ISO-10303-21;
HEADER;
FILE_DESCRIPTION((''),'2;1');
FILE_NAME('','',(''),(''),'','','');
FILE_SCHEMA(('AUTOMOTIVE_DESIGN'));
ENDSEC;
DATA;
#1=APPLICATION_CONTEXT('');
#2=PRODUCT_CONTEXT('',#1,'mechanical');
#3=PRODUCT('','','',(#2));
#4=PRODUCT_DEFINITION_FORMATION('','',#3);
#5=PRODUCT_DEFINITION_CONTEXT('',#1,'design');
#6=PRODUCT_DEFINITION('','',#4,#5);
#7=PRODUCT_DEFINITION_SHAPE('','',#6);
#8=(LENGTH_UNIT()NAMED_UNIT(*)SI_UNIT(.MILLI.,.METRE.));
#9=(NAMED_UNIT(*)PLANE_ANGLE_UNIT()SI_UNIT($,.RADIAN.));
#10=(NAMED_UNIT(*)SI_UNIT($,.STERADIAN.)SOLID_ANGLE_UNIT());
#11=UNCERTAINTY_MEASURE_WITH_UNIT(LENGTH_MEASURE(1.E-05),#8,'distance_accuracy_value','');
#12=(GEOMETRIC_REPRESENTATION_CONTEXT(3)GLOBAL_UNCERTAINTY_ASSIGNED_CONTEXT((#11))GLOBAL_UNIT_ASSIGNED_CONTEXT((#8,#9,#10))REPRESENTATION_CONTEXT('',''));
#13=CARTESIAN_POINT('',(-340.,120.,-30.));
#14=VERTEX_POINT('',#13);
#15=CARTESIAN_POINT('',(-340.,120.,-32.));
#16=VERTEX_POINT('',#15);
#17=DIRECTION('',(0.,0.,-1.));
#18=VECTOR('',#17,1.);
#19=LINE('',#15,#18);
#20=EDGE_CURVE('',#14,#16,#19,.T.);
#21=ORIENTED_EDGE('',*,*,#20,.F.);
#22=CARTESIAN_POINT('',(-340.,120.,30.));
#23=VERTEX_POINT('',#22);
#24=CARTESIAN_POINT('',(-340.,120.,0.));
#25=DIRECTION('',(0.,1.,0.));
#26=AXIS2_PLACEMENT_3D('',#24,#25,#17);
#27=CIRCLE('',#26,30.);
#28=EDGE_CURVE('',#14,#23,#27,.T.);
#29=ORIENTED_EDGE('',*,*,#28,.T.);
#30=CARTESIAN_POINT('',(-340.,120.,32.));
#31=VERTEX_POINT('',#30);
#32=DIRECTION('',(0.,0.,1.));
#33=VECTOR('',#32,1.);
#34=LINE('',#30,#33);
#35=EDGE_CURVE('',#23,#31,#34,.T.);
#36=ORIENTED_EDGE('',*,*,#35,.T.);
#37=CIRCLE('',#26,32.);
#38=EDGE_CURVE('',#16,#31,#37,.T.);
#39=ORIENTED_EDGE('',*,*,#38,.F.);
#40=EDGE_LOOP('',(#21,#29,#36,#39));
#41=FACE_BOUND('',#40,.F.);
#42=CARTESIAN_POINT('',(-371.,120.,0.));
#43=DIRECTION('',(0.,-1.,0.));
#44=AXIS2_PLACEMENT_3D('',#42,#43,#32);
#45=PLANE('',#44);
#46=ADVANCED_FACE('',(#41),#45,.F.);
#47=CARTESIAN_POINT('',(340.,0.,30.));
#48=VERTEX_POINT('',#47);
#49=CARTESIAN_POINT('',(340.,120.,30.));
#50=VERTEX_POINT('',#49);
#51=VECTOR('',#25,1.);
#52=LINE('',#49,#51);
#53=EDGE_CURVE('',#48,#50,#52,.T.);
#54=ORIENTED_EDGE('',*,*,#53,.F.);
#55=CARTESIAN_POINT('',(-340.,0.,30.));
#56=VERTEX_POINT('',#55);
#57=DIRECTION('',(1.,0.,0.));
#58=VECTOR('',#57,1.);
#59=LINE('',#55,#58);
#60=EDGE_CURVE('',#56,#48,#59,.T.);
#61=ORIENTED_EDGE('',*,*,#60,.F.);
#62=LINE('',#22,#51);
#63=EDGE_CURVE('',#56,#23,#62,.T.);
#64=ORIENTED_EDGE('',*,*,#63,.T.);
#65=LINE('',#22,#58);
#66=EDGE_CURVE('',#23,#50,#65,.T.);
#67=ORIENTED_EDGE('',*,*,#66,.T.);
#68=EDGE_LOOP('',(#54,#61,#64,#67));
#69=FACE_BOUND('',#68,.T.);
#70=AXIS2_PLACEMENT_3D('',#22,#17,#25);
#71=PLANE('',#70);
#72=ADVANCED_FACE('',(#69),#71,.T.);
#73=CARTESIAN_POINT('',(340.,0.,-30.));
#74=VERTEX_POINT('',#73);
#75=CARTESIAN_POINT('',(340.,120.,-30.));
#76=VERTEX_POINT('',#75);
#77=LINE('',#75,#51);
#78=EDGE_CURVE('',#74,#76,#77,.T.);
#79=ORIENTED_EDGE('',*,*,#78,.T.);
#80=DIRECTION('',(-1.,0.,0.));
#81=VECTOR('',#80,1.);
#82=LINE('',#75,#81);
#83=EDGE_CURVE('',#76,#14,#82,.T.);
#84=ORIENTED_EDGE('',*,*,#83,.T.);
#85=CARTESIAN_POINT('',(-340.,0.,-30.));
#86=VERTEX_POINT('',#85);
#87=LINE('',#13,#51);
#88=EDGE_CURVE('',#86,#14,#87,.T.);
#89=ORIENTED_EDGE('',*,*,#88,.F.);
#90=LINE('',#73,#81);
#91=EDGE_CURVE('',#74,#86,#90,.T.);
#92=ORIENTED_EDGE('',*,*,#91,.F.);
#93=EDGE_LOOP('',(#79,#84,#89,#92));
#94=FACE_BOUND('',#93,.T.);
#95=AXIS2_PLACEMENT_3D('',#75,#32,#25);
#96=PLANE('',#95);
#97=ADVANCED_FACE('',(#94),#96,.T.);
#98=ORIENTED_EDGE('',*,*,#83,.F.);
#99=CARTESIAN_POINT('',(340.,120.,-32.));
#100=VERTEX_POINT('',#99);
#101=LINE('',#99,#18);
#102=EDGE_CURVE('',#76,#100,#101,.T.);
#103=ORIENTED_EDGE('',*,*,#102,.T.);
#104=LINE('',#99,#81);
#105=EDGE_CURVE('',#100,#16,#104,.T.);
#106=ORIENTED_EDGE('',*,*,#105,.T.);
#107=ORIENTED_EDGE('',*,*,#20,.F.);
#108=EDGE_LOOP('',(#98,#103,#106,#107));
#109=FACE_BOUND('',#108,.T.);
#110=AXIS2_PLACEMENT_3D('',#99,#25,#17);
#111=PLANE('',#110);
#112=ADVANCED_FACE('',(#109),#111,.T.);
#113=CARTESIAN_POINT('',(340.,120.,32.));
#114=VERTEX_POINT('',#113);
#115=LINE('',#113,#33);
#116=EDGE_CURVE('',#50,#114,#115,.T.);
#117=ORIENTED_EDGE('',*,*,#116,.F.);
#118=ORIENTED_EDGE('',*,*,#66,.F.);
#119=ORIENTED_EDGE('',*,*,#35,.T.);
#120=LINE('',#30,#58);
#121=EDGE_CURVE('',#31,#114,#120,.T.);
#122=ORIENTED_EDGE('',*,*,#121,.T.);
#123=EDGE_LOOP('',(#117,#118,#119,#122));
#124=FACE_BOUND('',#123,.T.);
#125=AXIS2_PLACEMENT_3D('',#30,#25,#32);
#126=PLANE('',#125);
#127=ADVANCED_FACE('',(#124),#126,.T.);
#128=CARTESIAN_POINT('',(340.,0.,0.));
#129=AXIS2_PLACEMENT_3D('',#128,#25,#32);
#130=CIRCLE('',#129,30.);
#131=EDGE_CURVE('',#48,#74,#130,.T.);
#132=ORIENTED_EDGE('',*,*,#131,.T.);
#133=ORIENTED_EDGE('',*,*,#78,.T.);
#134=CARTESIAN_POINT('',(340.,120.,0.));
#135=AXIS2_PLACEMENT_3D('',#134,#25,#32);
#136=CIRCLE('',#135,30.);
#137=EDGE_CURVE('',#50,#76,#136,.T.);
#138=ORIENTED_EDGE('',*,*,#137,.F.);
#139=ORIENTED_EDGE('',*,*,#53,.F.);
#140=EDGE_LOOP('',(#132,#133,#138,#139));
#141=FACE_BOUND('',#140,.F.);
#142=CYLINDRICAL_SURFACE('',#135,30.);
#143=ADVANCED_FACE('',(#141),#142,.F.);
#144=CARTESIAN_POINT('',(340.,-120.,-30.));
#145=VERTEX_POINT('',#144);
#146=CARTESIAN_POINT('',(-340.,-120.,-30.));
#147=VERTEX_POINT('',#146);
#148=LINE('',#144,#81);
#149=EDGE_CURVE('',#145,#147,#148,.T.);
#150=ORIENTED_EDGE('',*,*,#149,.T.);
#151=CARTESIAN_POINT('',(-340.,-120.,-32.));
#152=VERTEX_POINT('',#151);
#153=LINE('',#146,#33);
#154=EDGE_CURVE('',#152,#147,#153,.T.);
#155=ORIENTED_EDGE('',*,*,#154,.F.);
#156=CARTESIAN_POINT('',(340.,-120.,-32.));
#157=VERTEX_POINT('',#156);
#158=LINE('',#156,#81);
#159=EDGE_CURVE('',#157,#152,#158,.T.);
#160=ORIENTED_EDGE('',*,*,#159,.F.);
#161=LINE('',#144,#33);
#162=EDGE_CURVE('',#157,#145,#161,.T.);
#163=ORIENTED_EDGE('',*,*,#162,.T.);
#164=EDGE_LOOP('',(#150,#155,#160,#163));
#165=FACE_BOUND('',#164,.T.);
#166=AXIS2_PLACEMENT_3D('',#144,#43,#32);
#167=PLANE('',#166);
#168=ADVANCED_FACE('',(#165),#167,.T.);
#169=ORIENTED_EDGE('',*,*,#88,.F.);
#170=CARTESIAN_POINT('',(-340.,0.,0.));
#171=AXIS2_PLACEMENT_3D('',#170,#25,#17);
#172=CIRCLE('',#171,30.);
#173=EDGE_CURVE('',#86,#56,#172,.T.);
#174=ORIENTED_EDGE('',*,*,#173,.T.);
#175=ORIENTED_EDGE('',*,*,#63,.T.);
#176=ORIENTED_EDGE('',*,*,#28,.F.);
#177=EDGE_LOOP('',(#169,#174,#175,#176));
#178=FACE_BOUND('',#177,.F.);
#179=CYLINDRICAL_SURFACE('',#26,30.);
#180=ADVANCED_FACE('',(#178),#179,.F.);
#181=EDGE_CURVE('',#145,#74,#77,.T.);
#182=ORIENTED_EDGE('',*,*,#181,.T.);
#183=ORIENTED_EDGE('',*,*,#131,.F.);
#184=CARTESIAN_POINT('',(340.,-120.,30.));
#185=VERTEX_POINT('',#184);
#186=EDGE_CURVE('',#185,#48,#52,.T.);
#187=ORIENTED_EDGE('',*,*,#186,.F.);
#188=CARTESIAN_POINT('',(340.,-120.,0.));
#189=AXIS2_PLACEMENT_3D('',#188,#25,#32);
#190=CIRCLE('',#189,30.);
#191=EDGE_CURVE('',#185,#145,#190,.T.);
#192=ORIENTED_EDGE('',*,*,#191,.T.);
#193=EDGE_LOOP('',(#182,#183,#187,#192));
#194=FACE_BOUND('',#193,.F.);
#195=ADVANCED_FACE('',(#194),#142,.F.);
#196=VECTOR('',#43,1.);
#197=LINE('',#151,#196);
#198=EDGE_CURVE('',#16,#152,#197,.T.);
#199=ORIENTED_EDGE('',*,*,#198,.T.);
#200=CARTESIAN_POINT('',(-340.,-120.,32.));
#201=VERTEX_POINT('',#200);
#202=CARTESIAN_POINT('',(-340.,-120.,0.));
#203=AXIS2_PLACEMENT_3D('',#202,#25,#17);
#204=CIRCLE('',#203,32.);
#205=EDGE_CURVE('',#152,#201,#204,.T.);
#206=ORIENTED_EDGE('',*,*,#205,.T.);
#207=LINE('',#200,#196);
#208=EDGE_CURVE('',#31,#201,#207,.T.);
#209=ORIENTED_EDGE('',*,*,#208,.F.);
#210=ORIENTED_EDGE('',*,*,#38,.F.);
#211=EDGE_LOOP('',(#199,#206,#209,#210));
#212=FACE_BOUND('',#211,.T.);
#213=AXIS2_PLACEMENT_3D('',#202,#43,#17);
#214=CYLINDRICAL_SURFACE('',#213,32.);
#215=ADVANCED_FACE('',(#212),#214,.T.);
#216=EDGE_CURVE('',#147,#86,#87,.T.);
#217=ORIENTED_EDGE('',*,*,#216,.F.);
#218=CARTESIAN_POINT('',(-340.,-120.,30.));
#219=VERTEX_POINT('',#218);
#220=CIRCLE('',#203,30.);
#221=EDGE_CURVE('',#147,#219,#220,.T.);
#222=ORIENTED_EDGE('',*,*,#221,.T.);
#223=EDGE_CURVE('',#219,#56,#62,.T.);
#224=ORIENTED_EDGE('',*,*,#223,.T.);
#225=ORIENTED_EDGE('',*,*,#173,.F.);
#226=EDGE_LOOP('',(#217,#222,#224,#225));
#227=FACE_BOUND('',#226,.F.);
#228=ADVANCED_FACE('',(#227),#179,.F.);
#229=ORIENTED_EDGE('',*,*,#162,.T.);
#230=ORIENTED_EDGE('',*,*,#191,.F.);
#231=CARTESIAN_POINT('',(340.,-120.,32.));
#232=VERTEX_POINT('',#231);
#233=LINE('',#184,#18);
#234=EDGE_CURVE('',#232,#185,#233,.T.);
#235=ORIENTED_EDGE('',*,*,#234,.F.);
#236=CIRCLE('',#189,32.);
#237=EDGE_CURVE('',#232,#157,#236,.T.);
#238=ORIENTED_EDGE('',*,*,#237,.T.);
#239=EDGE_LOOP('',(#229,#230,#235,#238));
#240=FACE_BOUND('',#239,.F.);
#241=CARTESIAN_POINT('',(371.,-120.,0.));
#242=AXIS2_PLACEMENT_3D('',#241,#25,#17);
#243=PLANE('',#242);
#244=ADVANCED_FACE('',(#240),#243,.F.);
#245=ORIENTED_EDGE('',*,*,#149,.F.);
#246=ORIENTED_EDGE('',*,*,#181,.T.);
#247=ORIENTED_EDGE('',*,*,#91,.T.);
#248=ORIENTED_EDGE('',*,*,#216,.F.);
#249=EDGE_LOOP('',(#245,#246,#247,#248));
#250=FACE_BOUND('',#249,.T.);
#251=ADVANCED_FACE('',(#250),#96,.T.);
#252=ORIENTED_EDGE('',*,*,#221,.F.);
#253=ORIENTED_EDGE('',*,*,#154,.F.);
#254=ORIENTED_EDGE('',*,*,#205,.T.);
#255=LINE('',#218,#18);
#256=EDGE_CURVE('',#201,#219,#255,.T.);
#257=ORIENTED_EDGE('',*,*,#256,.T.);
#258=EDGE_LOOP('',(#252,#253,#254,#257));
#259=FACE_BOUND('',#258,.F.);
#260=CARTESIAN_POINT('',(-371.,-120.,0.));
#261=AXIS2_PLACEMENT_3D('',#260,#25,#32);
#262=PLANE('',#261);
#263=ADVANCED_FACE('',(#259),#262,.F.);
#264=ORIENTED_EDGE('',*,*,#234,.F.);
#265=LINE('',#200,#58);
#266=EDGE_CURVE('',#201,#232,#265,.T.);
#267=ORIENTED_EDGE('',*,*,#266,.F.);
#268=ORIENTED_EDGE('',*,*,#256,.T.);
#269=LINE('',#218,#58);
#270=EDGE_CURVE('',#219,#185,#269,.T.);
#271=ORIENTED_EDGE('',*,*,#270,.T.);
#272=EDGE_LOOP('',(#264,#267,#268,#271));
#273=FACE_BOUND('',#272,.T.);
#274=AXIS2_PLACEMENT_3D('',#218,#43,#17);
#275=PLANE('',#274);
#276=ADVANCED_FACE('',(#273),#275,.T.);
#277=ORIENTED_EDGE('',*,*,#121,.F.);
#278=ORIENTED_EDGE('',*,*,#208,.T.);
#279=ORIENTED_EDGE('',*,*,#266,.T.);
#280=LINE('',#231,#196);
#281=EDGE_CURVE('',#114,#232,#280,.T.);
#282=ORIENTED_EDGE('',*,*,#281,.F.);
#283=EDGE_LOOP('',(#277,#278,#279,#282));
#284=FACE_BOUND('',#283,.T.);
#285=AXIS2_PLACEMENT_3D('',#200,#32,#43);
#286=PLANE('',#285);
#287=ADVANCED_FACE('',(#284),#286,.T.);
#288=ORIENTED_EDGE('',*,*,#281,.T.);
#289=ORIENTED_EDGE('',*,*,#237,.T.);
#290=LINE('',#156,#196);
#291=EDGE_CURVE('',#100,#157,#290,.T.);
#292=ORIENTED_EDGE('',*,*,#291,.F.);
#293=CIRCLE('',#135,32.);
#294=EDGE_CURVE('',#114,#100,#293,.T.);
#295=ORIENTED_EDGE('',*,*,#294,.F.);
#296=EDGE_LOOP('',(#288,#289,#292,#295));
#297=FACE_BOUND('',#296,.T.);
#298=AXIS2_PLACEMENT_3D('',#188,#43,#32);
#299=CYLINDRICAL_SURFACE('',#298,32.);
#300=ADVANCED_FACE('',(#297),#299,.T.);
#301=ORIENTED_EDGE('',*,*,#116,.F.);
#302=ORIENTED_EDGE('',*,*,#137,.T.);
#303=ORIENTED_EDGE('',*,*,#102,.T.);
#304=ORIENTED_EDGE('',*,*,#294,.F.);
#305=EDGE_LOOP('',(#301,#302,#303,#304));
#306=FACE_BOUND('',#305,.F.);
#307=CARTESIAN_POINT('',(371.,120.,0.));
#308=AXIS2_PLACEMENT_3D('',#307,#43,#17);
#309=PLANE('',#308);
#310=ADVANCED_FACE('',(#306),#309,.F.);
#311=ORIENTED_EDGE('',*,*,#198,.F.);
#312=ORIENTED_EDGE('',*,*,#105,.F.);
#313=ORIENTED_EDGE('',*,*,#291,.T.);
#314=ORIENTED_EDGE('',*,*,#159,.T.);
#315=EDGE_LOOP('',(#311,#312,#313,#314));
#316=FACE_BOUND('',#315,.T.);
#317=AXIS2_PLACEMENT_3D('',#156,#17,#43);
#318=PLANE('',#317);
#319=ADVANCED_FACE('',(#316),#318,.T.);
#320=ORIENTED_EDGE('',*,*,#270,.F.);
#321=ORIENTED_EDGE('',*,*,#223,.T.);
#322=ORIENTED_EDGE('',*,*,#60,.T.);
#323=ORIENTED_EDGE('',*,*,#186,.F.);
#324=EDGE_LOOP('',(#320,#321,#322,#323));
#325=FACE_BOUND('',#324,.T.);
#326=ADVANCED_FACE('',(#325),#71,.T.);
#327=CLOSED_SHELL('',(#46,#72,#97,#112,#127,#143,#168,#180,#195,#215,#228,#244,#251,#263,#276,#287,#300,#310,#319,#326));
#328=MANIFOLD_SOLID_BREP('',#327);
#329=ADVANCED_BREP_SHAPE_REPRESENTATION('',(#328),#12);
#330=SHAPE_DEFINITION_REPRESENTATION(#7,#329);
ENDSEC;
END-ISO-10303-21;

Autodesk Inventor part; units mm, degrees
ref_plane "YZ Plane" through (0, 0, 0) normal (1, 0, 0) x (0, 1, 0)
ref_plane "XZ Plane" through (0, 0, 0) normal (0, 1, 0) x (-1, 0, 0)
sketch "Sketch1" plane through (0, 0, 0) normal (0, 1, 0) x (-1, 0, 0)
  line L0 (370, 0) -> (-370, 0) construction
  line L1 (340, 30) -> (-340, 30)
  line L2 (-340, -30) -> (340, -30)
  arc A0 (340, -30) -> (340, 30) centre (340, 0) ccw
  arc A1 (-340, 30) -> (-340, -30) centre (-340, 0) ccw
  point P0 (0, 0)
  point P1 (0, 0)
  point P2 (-370, 0)
  point P3 (370, 0)
  dimension "d2" = 60
  dimension "d7" = 680
ref_plane "Work Plane1" through (-340, 0, -30) normal (-1, 0, 0) x (0, -1, 0)
sketch "Sketch2" plane through (-340, 0, -30) normal (-1, 0, 0) x (0, -1, 0)
  line L0 (-120, 0) -> (120, 0)
  line L1 (120, 0) -> (120, -2)
  line L2 (120, -2) -> (-120, -2)
  line L3 (-120, -2) -> (-120, 0)
  line L4 (-120, 0) -> (120, -2) construction
  line L5 (120, 0) -> (-120, -2) construction
  line L6 (0, 60) -> (0, 0) projected
  point P0 (0, 30)
  dimension "d3" = 240
  dimension "d4" = 2
sweep "Sweep1" add profiles "Sketch2" path "Sketch1"
properties part number "HCMUTE-CDT23-BELT_BTC" material "PVC, Unplasticized"
